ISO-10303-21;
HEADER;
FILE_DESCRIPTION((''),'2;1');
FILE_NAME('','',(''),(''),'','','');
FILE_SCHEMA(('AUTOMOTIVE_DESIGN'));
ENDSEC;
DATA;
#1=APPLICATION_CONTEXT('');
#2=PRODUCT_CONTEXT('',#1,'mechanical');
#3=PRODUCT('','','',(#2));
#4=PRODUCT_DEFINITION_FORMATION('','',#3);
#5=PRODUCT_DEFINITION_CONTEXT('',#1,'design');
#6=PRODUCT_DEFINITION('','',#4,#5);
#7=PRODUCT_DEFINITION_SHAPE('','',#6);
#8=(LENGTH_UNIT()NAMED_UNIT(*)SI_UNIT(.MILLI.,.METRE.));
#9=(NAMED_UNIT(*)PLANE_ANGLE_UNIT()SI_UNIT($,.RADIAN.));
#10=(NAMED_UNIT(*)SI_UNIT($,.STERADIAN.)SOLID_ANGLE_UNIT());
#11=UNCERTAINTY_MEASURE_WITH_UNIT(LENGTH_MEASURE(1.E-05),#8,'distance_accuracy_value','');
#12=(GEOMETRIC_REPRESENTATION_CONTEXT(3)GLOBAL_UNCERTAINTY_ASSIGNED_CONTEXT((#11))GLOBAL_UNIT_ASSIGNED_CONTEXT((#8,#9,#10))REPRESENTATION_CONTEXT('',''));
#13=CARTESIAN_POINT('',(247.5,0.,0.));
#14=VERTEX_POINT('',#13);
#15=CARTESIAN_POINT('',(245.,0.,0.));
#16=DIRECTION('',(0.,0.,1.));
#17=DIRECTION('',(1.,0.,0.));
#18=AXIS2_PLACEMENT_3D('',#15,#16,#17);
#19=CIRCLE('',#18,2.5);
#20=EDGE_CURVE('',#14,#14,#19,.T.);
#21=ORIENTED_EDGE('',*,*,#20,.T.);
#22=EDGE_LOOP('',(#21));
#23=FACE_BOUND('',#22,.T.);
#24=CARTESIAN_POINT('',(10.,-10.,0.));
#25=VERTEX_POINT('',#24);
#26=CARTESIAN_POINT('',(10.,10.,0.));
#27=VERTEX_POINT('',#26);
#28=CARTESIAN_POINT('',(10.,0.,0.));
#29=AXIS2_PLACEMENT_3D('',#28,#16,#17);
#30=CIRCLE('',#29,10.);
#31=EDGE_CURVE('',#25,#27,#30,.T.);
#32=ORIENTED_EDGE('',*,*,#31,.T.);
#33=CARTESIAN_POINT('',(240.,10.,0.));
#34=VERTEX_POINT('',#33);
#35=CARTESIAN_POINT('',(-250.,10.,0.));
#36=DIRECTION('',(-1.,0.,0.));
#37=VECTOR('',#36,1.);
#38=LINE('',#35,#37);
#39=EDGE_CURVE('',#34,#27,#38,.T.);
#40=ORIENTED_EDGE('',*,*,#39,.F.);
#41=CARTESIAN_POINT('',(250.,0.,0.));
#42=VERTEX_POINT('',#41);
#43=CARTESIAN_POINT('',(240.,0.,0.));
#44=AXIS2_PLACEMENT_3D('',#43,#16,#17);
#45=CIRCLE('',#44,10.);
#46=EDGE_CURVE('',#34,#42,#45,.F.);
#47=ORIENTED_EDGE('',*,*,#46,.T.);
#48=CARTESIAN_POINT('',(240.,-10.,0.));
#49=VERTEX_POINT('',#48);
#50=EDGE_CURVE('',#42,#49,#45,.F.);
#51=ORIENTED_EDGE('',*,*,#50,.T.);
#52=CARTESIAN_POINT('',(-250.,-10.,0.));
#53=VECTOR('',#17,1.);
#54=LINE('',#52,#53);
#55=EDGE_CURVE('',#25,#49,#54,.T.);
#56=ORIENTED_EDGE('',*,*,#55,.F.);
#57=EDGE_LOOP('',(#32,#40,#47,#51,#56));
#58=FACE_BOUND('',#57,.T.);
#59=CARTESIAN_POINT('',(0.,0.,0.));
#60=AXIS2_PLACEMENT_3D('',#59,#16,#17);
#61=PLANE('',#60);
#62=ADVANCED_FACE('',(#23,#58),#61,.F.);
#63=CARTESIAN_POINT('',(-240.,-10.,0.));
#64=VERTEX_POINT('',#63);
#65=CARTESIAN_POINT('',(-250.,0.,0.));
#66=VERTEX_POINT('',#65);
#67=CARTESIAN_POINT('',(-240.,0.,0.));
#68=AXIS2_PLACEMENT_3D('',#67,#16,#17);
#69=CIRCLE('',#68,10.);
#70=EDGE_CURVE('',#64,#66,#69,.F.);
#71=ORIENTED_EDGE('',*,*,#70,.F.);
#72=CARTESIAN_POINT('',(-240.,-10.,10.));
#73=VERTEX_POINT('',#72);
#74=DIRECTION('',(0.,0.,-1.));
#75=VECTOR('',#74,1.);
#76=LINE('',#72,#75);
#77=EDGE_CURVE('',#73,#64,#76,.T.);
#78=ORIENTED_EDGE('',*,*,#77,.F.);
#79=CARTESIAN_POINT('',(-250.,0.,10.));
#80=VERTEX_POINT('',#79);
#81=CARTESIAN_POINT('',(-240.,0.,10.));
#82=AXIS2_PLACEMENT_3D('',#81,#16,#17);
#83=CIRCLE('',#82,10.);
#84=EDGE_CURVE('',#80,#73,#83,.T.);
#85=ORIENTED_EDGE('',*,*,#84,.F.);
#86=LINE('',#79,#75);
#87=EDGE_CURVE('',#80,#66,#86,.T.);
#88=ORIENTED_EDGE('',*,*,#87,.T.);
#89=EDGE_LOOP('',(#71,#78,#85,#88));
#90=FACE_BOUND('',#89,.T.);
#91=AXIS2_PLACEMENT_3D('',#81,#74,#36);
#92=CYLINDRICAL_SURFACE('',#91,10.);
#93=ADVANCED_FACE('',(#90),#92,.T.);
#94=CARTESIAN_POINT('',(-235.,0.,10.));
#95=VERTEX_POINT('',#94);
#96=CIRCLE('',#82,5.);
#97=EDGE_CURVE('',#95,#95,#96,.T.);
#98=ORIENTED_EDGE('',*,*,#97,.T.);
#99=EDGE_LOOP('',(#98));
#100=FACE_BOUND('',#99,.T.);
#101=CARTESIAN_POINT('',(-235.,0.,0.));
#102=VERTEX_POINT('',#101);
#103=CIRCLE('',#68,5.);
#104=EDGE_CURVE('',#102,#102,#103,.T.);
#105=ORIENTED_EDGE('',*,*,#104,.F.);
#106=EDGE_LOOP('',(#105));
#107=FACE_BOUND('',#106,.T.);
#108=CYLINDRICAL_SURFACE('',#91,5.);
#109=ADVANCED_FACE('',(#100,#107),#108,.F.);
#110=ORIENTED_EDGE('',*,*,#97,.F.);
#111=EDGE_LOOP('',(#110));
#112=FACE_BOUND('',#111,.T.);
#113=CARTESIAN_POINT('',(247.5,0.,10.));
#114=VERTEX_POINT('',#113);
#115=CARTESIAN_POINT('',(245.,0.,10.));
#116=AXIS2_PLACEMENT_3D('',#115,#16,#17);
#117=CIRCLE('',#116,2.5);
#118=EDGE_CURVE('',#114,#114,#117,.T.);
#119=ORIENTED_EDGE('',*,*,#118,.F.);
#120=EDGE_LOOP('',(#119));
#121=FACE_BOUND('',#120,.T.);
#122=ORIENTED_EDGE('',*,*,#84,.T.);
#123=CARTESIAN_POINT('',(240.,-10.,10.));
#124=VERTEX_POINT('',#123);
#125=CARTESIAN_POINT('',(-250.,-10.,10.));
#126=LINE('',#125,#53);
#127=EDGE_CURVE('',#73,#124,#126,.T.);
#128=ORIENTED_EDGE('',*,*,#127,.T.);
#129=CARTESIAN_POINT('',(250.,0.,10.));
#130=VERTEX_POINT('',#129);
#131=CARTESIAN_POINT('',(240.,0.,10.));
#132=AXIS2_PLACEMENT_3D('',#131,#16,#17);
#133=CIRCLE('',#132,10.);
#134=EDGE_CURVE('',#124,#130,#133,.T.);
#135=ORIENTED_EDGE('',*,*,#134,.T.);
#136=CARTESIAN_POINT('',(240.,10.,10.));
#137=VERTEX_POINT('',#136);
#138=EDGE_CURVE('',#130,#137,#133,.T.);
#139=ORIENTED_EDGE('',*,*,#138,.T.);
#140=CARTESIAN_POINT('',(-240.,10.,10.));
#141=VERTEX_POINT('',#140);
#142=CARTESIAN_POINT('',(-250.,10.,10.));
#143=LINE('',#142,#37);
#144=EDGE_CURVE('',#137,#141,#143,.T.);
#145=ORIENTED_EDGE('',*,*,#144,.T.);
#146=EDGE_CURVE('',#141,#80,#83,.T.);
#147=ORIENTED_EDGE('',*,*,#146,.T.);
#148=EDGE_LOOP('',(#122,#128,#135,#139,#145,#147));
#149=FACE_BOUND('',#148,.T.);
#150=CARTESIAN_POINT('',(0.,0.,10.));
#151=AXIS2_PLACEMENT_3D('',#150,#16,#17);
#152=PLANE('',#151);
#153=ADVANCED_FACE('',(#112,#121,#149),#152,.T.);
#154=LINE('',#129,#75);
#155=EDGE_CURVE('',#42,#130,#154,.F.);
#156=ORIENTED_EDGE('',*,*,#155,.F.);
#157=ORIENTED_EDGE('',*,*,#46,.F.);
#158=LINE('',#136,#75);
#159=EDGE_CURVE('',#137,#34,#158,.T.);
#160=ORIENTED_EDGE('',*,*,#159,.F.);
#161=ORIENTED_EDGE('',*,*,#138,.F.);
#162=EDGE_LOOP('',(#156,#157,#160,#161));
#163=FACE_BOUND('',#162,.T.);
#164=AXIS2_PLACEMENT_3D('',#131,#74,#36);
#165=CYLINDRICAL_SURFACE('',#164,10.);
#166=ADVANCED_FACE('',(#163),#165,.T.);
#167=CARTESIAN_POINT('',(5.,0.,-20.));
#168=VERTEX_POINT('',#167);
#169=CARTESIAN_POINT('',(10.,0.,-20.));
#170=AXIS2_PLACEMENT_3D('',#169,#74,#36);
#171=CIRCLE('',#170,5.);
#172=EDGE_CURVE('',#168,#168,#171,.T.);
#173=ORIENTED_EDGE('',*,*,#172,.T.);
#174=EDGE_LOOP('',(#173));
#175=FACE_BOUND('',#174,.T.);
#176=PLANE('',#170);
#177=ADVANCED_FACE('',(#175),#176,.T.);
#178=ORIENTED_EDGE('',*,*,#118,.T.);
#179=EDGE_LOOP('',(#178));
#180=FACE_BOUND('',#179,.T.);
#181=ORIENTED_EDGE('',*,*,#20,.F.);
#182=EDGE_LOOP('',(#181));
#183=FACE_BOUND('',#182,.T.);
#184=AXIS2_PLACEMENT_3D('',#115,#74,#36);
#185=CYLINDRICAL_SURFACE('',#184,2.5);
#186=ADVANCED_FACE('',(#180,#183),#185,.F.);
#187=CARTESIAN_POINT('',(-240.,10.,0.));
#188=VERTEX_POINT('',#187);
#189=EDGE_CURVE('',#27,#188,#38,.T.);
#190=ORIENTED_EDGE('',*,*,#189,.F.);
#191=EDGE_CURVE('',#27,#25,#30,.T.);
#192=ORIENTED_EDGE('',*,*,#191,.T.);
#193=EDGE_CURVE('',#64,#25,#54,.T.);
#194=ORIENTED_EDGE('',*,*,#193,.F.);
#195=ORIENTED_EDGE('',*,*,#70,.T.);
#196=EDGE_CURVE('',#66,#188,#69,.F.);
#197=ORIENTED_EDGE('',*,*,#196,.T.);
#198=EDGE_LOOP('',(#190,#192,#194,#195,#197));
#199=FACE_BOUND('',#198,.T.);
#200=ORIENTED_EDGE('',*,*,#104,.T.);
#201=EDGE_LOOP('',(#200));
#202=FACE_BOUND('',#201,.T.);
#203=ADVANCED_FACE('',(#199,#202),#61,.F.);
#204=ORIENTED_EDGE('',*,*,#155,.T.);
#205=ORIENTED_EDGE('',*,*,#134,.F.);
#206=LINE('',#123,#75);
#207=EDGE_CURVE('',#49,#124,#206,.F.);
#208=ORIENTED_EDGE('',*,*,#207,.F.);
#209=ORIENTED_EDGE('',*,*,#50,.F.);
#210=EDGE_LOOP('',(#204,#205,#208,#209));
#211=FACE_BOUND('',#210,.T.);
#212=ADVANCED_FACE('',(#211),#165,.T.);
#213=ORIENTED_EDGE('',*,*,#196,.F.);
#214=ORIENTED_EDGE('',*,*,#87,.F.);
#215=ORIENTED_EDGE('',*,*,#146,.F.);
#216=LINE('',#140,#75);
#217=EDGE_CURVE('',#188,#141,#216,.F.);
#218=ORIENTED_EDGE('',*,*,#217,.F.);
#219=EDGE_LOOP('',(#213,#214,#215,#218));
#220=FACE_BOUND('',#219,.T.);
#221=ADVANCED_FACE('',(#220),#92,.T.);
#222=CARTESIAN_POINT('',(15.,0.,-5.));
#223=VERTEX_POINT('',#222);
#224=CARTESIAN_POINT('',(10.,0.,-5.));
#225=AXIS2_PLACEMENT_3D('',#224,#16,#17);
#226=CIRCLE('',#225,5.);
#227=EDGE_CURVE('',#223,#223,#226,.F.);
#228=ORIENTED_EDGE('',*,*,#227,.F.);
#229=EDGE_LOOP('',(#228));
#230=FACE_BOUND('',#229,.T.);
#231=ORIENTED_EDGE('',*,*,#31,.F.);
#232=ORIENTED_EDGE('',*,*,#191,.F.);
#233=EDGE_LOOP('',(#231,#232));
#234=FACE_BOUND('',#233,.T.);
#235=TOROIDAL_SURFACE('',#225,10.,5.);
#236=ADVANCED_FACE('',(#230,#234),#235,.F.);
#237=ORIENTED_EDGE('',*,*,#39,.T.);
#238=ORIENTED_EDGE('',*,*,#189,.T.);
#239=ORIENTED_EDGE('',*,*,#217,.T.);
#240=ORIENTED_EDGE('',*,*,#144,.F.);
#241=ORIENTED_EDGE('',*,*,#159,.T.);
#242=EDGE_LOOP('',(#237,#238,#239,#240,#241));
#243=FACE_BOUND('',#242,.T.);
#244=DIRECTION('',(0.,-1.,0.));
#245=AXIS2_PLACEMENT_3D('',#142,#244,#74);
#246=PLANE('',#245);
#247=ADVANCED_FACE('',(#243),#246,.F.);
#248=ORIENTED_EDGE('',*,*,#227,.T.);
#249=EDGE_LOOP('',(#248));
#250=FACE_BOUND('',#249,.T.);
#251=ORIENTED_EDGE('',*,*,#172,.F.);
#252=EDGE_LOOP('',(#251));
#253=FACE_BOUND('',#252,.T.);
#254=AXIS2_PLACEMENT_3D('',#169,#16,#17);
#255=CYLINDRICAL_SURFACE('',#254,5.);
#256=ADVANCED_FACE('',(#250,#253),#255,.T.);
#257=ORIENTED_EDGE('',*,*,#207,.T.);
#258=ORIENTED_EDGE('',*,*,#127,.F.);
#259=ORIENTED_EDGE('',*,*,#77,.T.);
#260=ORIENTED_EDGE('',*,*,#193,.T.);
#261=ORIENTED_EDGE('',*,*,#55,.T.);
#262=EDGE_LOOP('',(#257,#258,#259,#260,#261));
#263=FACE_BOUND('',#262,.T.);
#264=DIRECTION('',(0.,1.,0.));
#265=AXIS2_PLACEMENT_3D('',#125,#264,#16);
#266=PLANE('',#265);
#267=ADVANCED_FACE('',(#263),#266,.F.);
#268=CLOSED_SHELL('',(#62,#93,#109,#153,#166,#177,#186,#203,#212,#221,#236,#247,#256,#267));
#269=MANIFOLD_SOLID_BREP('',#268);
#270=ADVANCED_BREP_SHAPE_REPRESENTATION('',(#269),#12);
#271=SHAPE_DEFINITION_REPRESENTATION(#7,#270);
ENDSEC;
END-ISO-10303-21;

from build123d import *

# Parameters (mm, degrees)
SKETCH1_W           = 500
SKETCH1_H           = 20
SKETCH1_R           = 5
SKETCH1_R_2         = 2.5
BOSS_EXTRUDE1_DEPTH = 10
FILLET1_R           = 10
SKETCH2_R           = 5
BOSS_EXTRUDE2_DEPTH = 20
FILLET2_R           = 5


with BuildPart() as part:
    # Sketch1 → Boss-Extrude1 (new body)
    with BuildSketch(Plane.XY):
        Rectangle(SKETCH1_W, SKETCH1_H)
        with Locations((-240, 0)):
            Circle(SKETCH1_R, mode=Mode.SUBTRACT)
        with Locations((245, 0)):
            Circle(SKETCH1_R_2, mode=Mode.SUBTRACT)
    extrude(amount=BOSS_EXTRUDE1_DEPTH)

    # Fillet1
    fillet1_edges = [part.edges().sort_by_distance(p)[0] for p in [
        (250, -10, 5),
        (250, 10, 5),
        (-250, -10, 5),
        (-250, 10, 5),
    ]]
    fillet(fillet1_edges, radius=FILLET1_R - 0.0001)  # a hair under: the kernel refuses the full size

    # Sketch2 → Boss-Extrude2 (add)
    with BuildSketch(Plane(origin=(0, 0, 0), x_dir=(-1, 0, 0), z_dir=(0, 0, -1))):
        with Locations(Location((-10, 0, 0), (0, 0, 180))):
            Circle(SKETCH2_R)
    extrude(amount=BOSS_EXTRUDE2_DEPTH)

    # Fillet2
    fillet2_edges = [part.edges().sort_by_distance(p)[0] for p in [
        (5, 0, 0),
    ]]
    fillet(fillet2_edges, radius=FILLET2_R - 0.0001)  # a hair under: the kernel refuses the full size


solid = part.part
